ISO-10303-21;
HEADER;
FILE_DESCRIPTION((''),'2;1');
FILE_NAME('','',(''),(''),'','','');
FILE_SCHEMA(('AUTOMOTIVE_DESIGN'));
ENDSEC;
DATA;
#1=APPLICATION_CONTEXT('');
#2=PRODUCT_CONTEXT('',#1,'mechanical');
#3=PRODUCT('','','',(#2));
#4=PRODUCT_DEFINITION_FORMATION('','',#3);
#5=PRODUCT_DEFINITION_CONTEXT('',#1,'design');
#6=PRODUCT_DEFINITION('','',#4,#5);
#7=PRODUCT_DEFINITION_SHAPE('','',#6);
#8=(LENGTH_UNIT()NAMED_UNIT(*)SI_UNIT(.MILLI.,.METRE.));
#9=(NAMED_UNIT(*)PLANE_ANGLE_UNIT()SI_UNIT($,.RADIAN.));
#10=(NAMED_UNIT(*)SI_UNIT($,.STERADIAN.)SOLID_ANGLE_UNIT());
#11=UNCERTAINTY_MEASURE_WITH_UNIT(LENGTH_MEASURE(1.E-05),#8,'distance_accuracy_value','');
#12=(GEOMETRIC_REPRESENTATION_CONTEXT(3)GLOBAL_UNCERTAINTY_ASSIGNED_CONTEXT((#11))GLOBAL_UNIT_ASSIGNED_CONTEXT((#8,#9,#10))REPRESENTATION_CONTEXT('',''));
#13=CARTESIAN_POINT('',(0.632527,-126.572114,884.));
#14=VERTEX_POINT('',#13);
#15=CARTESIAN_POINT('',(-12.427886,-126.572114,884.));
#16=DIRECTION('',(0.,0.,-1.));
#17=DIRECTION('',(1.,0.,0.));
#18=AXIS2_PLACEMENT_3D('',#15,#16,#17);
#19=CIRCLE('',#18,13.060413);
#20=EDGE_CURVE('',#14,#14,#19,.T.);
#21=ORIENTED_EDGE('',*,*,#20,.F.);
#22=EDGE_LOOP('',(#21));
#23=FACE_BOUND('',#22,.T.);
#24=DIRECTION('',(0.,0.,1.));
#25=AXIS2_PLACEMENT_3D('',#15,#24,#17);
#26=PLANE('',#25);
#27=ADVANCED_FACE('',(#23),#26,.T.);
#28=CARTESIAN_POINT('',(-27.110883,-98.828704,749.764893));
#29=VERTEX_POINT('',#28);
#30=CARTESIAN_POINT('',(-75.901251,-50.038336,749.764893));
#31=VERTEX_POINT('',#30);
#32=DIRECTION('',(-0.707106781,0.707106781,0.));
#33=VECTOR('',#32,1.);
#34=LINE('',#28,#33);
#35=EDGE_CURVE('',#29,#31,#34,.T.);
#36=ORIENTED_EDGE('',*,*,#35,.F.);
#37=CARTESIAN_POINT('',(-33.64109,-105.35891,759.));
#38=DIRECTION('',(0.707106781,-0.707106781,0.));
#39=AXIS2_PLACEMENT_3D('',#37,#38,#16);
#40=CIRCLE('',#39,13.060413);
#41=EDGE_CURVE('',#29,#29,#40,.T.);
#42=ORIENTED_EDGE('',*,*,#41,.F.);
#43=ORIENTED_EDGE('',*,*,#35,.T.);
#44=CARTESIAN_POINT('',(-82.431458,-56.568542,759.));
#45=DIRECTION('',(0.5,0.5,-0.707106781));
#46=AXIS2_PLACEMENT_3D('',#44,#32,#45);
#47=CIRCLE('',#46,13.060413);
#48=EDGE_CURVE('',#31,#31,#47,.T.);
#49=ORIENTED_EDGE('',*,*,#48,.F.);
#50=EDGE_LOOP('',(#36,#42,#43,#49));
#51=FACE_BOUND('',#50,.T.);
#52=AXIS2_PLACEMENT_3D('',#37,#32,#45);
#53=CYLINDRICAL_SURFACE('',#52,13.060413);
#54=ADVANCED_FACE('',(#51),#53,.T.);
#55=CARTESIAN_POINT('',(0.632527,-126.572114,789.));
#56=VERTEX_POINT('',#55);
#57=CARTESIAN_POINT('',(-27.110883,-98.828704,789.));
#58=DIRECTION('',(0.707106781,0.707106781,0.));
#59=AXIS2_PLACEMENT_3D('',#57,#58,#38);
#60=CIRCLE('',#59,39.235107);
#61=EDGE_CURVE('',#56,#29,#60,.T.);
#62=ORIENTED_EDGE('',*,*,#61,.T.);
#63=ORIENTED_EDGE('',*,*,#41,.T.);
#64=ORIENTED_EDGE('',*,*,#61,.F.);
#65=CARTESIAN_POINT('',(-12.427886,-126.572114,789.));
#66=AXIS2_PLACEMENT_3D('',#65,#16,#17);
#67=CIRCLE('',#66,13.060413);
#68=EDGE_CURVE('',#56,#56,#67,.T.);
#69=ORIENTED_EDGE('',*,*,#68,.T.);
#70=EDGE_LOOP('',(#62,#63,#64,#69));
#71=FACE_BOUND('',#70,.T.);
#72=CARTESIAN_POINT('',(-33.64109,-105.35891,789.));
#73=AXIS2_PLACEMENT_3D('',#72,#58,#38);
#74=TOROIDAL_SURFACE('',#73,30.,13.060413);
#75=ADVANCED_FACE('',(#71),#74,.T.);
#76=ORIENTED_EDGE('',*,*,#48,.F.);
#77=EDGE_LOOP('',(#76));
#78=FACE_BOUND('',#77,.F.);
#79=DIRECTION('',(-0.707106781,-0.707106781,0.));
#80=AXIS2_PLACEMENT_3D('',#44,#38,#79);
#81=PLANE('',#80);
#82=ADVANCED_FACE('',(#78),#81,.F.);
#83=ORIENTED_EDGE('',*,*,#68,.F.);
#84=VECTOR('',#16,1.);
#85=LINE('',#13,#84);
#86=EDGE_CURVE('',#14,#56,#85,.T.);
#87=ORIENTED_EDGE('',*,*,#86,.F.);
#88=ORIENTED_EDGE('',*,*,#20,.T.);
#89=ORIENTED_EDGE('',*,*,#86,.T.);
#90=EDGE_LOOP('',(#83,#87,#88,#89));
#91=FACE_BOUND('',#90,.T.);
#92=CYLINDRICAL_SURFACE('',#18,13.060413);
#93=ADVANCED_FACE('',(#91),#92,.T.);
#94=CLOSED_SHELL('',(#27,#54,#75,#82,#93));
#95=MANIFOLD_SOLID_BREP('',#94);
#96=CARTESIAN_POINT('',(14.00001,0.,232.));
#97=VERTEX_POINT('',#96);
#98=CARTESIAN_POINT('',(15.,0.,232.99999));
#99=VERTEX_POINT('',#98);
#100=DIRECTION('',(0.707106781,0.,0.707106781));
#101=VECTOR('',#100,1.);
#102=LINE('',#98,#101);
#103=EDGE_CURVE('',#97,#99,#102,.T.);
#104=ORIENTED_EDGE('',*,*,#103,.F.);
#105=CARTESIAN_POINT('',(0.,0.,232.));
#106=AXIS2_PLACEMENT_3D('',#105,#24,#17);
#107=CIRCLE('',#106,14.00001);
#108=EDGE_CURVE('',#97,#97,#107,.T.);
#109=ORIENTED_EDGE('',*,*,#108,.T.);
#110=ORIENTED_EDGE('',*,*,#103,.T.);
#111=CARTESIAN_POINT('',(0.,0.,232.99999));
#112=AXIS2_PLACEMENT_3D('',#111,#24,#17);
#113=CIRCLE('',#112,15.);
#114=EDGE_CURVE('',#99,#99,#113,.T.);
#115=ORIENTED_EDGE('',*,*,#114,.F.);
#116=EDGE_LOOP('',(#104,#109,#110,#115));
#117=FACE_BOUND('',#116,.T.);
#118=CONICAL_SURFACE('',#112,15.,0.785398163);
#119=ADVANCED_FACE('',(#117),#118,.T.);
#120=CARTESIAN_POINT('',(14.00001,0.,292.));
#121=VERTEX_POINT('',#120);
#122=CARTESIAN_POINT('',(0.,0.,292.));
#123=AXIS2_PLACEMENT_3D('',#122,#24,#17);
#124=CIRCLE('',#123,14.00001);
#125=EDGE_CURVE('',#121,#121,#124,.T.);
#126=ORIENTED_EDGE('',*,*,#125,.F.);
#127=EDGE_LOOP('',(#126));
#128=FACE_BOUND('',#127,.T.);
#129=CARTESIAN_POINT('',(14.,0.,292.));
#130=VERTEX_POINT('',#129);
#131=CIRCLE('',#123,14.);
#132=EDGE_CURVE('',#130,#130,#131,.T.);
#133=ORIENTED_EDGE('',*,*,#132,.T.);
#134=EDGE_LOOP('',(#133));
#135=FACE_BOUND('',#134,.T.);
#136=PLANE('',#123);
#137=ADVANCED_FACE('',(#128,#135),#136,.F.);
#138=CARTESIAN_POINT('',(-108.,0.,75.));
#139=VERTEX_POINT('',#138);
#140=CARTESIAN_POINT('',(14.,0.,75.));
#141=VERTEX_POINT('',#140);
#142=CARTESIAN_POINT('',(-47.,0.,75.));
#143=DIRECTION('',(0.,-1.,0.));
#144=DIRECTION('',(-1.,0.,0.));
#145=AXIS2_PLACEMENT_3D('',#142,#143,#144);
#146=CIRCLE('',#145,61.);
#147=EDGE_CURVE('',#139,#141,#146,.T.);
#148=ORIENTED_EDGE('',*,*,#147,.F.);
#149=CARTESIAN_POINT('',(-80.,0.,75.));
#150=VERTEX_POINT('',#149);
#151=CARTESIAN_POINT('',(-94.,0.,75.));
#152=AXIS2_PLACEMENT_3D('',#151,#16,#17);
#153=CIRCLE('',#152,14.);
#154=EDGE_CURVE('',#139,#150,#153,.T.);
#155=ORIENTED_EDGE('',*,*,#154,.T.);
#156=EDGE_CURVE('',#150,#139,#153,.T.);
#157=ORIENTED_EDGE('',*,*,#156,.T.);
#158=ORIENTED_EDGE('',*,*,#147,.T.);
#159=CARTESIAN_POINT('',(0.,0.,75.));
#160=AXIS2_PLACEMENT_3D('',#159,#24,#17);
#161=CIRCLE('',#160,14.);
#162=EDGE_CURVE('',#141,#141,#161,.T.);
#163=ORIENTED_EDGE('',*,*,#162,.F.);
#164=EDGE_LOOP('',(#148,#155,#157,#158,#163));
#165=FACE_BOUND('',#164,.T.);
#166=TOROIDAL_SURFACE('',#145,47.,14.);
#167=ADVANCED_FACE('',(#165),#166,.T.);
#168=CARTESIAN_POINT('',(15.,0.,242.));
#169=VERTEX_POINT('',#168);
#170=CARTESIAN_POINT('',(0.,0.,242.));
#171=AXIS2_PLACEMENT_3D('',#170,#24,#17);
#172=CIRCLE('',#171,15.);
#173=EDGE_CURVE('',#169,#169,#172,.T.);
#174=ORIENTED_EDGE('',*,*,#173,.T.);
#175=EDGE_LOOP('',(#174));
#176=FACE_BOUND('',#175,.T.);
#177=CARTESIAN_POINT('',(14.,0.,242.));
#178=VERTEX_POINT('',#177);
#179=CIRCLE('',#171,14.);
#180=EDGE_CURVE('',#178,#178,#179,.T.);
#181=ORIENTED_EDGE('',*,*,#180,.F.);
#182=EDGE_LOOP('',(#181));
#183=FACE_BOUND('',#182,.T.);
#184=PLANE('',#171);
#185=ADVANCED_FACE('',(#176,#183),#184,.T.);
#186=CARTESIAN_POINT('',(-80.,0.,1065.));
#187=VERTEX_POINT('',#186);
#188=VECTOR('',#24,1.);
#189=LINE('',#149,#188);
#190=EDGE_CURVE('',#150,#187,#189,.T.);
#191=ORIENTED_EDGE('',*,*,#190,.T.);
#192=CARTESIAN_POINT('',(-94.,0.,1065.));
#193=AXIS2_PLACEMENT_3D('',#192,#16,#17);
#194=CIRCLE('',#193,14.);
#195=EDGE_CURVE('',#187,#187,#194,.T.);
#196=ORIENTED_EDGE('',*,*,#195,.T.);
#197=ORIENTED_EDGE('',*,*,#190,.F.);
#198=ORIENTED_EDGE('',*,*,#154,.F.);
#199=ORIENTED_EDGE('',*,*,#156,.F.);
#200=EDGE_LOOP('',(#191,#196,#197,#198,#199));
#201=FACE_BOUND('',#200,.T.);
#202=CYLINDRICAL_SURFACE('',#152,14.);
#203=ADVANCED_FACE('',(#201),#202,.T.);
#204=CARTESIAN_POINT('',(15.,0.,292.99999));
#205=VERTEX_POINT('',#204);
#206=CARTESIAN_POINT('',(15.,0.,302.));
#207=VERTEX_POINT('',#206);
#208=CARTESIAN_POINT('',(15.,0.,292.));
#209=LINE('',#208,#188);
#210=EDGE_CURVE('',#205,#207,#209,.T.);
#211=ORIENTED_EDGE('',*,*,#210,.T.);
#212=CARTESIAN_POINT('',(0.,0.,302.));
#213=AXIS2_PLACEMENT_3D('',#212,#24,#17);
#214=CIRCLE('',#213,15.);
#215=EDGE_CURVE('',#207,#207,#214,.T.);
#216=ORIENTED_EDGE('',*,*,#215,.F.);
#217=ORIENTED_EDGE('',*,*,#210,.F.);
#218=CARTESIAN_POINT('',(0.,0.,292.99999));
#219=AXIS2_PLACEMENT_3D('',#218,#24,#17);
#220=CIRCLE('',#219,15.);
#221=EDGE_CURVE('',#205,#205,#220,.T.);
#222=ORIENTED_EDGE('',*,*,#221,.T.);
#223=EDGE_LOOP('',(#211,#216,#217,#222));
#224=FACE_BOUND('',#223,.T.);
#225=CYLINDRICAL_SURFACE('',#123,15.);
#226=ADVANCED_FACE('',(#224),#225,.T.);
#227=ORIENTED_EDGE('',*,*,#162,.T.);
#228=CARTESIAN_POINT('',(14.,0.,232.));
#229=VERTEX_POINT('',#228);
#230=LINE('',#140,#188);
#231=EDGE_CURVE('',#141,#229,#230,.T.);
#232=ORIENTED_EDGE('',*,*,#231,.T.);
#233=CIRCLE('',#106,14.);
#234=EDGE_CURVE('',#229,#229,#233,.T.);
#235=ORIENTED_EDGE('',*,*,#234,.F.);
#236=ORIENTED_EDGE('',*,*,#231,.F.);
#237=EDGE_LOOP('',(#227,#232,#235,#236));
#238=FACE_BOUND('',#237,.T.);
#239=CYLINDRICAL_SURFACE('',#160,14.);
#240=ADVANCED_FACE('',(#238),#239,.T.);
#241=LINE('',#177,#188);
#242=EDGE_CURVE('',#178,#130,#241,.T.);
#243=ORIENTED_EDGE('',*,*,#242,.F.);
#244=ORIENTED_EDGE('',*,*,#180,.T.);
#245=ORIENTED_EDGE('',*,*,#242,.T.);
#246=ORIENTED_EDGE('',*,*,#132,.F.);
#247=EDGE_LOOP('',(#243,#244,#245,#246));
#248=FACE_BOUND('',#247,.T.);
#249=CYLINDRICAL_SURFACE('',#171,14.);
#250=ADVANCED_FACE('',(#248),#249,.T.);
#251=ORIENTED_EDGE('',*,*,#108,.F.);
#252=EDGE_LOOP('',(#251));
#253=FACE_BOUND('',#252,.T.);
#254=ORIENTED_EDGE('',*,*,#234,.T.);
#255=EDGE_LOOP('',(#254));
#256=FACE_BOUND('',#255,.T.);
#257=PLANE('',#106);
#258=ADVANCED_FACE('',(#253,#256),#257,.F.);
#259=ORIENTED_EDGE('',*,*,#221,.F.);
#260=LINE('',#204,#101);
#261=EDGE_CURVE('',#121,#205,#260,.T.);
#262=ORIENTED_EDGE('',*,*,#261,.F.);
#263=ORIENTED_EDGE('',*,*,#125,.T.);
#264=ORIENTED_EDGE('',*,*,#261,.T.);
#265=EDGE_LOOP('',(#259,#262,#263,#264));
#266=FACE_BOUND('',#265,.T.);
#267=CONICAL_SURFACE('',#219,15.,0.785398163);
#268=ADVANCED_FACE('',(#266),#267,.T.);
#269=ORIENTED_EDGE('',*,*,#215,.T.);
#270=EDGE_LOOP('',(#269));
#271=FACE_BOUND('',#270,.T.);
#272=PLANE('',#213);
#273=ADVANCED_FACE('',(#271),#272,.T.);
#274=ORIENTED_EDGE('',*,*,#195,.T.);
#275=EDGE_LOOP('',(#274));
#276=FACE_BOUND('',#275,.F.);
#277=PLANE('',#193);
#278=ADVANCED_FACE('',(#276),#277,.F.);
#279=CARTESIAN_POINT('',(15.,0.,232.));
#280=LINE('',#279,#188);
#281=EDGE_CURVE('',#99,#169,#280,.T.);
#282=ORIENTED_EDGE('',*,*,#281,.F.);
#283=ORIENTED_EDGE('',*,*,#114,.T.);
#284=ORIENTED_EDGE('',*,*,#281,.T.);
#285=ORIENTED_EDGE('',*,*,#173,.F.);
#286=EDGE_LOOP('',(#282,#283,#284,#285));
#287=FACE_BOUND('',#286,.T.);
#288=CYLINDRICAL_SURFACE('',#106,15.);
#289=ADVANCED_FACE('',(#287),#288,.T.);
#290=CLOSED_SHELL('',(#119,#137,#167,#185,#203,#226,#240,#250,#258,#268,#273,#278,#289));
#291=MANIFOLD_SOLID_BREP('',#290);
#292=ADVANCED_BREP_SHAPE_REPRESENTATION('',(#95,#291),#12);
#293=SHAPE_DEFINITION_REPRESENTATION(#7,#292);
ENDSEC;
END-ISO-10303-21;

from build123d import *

# Parameters (mm, degrees)
F4_SIZE   = 0.99999
F6_R      = 14
F7_DEPTH  = 990
F3_FACE_R = 14
F11_R     = 13.0604129179


# Not quite as in the source:
# - a fillet or chamfer is up to 0.001 mm smaller than in the source, because OpenCascade refuses the exact size


with BuildPart() as f3:
    # F2 (on Front) → F3 (revolve)
    with BuildSketch(Plane.XZ):
        Polygon((0, 302), (0, 75), (14, 75), (14, 232), (15, 232), (15, 242), (14, 242), (14, 292), (15, 292), (15, 302), align=None)
    revolve(axis=Axis((0, 0, 188.5), (0, 0, 1)))

    # F4 (size 1 in the source; OpenCascade refuses exactly that, so slightly less here)
    f4_edges = [f3.edges().sort_by_distance(p)[0] for p in [
        (-15, 0, 232),
        (-15, 0, 292),
    ]]
    chamfer(f4_edges, length=F4_SIZE)



with BuildPart() as f7:
    # F6 (on face) → F7 (new body)
    with BuildSketch(Plane(origin=(0, 0, 75), x_dir=(1, 0, 0), z_dir=(0, 0, -1))):
        with Locations((-94, 0)):
            Circle(F6_R)
    extrude(amount=-F7_DEPTH)


with BuildPart() as f3_1:
    add(f3.part)

    add(f7.part)  # F9 merges F7
    # F9: sweep along a path in F8
    with BuildLine(Plane.XZ) as f9_path:
        ThreePointArc((-94, 75), (-47, 28), (0, 75))
    # F3_face (on face) → F9 (sweep)
    with BuildSketch(Plane(origin=(0, 0, 75), x_dir=(1, 0, 0), z_dir=(0, 0, -1))):
        Circle(F3_FACE_R)
    sweep(path=f9_path.line)


with BuildPart() as f14:
    # F14: sweep along a path in F13
    with BuildLine(Plane(origin=(-69.5, -69.5, 0), x_dir=(-0.7071067812, 0.7071067812, 0), z_dir=(0.7071067812, 0.7071067812, 0))) as f14_path:
        Line((-80.7121574151, 884), (-80.7121574151, 789))
        ThreePointArc((-80.7121574151, 789), (-71.9253608507, 767.7867965644), (-50.7121574151, 759))
        Line((-50.7121574151, 759), (18.2878425849, 759))
    # F11 (on offset) → F14 (sweep)
    with BuildSketch(Plane.XY.offset(884)):
        with Locations((-12.4278861676, -126.5721138324)):
            Circle(F11_R)
    sweep(path=f14_path.line)


solid = Compound([f3_1.part, f14.part])
